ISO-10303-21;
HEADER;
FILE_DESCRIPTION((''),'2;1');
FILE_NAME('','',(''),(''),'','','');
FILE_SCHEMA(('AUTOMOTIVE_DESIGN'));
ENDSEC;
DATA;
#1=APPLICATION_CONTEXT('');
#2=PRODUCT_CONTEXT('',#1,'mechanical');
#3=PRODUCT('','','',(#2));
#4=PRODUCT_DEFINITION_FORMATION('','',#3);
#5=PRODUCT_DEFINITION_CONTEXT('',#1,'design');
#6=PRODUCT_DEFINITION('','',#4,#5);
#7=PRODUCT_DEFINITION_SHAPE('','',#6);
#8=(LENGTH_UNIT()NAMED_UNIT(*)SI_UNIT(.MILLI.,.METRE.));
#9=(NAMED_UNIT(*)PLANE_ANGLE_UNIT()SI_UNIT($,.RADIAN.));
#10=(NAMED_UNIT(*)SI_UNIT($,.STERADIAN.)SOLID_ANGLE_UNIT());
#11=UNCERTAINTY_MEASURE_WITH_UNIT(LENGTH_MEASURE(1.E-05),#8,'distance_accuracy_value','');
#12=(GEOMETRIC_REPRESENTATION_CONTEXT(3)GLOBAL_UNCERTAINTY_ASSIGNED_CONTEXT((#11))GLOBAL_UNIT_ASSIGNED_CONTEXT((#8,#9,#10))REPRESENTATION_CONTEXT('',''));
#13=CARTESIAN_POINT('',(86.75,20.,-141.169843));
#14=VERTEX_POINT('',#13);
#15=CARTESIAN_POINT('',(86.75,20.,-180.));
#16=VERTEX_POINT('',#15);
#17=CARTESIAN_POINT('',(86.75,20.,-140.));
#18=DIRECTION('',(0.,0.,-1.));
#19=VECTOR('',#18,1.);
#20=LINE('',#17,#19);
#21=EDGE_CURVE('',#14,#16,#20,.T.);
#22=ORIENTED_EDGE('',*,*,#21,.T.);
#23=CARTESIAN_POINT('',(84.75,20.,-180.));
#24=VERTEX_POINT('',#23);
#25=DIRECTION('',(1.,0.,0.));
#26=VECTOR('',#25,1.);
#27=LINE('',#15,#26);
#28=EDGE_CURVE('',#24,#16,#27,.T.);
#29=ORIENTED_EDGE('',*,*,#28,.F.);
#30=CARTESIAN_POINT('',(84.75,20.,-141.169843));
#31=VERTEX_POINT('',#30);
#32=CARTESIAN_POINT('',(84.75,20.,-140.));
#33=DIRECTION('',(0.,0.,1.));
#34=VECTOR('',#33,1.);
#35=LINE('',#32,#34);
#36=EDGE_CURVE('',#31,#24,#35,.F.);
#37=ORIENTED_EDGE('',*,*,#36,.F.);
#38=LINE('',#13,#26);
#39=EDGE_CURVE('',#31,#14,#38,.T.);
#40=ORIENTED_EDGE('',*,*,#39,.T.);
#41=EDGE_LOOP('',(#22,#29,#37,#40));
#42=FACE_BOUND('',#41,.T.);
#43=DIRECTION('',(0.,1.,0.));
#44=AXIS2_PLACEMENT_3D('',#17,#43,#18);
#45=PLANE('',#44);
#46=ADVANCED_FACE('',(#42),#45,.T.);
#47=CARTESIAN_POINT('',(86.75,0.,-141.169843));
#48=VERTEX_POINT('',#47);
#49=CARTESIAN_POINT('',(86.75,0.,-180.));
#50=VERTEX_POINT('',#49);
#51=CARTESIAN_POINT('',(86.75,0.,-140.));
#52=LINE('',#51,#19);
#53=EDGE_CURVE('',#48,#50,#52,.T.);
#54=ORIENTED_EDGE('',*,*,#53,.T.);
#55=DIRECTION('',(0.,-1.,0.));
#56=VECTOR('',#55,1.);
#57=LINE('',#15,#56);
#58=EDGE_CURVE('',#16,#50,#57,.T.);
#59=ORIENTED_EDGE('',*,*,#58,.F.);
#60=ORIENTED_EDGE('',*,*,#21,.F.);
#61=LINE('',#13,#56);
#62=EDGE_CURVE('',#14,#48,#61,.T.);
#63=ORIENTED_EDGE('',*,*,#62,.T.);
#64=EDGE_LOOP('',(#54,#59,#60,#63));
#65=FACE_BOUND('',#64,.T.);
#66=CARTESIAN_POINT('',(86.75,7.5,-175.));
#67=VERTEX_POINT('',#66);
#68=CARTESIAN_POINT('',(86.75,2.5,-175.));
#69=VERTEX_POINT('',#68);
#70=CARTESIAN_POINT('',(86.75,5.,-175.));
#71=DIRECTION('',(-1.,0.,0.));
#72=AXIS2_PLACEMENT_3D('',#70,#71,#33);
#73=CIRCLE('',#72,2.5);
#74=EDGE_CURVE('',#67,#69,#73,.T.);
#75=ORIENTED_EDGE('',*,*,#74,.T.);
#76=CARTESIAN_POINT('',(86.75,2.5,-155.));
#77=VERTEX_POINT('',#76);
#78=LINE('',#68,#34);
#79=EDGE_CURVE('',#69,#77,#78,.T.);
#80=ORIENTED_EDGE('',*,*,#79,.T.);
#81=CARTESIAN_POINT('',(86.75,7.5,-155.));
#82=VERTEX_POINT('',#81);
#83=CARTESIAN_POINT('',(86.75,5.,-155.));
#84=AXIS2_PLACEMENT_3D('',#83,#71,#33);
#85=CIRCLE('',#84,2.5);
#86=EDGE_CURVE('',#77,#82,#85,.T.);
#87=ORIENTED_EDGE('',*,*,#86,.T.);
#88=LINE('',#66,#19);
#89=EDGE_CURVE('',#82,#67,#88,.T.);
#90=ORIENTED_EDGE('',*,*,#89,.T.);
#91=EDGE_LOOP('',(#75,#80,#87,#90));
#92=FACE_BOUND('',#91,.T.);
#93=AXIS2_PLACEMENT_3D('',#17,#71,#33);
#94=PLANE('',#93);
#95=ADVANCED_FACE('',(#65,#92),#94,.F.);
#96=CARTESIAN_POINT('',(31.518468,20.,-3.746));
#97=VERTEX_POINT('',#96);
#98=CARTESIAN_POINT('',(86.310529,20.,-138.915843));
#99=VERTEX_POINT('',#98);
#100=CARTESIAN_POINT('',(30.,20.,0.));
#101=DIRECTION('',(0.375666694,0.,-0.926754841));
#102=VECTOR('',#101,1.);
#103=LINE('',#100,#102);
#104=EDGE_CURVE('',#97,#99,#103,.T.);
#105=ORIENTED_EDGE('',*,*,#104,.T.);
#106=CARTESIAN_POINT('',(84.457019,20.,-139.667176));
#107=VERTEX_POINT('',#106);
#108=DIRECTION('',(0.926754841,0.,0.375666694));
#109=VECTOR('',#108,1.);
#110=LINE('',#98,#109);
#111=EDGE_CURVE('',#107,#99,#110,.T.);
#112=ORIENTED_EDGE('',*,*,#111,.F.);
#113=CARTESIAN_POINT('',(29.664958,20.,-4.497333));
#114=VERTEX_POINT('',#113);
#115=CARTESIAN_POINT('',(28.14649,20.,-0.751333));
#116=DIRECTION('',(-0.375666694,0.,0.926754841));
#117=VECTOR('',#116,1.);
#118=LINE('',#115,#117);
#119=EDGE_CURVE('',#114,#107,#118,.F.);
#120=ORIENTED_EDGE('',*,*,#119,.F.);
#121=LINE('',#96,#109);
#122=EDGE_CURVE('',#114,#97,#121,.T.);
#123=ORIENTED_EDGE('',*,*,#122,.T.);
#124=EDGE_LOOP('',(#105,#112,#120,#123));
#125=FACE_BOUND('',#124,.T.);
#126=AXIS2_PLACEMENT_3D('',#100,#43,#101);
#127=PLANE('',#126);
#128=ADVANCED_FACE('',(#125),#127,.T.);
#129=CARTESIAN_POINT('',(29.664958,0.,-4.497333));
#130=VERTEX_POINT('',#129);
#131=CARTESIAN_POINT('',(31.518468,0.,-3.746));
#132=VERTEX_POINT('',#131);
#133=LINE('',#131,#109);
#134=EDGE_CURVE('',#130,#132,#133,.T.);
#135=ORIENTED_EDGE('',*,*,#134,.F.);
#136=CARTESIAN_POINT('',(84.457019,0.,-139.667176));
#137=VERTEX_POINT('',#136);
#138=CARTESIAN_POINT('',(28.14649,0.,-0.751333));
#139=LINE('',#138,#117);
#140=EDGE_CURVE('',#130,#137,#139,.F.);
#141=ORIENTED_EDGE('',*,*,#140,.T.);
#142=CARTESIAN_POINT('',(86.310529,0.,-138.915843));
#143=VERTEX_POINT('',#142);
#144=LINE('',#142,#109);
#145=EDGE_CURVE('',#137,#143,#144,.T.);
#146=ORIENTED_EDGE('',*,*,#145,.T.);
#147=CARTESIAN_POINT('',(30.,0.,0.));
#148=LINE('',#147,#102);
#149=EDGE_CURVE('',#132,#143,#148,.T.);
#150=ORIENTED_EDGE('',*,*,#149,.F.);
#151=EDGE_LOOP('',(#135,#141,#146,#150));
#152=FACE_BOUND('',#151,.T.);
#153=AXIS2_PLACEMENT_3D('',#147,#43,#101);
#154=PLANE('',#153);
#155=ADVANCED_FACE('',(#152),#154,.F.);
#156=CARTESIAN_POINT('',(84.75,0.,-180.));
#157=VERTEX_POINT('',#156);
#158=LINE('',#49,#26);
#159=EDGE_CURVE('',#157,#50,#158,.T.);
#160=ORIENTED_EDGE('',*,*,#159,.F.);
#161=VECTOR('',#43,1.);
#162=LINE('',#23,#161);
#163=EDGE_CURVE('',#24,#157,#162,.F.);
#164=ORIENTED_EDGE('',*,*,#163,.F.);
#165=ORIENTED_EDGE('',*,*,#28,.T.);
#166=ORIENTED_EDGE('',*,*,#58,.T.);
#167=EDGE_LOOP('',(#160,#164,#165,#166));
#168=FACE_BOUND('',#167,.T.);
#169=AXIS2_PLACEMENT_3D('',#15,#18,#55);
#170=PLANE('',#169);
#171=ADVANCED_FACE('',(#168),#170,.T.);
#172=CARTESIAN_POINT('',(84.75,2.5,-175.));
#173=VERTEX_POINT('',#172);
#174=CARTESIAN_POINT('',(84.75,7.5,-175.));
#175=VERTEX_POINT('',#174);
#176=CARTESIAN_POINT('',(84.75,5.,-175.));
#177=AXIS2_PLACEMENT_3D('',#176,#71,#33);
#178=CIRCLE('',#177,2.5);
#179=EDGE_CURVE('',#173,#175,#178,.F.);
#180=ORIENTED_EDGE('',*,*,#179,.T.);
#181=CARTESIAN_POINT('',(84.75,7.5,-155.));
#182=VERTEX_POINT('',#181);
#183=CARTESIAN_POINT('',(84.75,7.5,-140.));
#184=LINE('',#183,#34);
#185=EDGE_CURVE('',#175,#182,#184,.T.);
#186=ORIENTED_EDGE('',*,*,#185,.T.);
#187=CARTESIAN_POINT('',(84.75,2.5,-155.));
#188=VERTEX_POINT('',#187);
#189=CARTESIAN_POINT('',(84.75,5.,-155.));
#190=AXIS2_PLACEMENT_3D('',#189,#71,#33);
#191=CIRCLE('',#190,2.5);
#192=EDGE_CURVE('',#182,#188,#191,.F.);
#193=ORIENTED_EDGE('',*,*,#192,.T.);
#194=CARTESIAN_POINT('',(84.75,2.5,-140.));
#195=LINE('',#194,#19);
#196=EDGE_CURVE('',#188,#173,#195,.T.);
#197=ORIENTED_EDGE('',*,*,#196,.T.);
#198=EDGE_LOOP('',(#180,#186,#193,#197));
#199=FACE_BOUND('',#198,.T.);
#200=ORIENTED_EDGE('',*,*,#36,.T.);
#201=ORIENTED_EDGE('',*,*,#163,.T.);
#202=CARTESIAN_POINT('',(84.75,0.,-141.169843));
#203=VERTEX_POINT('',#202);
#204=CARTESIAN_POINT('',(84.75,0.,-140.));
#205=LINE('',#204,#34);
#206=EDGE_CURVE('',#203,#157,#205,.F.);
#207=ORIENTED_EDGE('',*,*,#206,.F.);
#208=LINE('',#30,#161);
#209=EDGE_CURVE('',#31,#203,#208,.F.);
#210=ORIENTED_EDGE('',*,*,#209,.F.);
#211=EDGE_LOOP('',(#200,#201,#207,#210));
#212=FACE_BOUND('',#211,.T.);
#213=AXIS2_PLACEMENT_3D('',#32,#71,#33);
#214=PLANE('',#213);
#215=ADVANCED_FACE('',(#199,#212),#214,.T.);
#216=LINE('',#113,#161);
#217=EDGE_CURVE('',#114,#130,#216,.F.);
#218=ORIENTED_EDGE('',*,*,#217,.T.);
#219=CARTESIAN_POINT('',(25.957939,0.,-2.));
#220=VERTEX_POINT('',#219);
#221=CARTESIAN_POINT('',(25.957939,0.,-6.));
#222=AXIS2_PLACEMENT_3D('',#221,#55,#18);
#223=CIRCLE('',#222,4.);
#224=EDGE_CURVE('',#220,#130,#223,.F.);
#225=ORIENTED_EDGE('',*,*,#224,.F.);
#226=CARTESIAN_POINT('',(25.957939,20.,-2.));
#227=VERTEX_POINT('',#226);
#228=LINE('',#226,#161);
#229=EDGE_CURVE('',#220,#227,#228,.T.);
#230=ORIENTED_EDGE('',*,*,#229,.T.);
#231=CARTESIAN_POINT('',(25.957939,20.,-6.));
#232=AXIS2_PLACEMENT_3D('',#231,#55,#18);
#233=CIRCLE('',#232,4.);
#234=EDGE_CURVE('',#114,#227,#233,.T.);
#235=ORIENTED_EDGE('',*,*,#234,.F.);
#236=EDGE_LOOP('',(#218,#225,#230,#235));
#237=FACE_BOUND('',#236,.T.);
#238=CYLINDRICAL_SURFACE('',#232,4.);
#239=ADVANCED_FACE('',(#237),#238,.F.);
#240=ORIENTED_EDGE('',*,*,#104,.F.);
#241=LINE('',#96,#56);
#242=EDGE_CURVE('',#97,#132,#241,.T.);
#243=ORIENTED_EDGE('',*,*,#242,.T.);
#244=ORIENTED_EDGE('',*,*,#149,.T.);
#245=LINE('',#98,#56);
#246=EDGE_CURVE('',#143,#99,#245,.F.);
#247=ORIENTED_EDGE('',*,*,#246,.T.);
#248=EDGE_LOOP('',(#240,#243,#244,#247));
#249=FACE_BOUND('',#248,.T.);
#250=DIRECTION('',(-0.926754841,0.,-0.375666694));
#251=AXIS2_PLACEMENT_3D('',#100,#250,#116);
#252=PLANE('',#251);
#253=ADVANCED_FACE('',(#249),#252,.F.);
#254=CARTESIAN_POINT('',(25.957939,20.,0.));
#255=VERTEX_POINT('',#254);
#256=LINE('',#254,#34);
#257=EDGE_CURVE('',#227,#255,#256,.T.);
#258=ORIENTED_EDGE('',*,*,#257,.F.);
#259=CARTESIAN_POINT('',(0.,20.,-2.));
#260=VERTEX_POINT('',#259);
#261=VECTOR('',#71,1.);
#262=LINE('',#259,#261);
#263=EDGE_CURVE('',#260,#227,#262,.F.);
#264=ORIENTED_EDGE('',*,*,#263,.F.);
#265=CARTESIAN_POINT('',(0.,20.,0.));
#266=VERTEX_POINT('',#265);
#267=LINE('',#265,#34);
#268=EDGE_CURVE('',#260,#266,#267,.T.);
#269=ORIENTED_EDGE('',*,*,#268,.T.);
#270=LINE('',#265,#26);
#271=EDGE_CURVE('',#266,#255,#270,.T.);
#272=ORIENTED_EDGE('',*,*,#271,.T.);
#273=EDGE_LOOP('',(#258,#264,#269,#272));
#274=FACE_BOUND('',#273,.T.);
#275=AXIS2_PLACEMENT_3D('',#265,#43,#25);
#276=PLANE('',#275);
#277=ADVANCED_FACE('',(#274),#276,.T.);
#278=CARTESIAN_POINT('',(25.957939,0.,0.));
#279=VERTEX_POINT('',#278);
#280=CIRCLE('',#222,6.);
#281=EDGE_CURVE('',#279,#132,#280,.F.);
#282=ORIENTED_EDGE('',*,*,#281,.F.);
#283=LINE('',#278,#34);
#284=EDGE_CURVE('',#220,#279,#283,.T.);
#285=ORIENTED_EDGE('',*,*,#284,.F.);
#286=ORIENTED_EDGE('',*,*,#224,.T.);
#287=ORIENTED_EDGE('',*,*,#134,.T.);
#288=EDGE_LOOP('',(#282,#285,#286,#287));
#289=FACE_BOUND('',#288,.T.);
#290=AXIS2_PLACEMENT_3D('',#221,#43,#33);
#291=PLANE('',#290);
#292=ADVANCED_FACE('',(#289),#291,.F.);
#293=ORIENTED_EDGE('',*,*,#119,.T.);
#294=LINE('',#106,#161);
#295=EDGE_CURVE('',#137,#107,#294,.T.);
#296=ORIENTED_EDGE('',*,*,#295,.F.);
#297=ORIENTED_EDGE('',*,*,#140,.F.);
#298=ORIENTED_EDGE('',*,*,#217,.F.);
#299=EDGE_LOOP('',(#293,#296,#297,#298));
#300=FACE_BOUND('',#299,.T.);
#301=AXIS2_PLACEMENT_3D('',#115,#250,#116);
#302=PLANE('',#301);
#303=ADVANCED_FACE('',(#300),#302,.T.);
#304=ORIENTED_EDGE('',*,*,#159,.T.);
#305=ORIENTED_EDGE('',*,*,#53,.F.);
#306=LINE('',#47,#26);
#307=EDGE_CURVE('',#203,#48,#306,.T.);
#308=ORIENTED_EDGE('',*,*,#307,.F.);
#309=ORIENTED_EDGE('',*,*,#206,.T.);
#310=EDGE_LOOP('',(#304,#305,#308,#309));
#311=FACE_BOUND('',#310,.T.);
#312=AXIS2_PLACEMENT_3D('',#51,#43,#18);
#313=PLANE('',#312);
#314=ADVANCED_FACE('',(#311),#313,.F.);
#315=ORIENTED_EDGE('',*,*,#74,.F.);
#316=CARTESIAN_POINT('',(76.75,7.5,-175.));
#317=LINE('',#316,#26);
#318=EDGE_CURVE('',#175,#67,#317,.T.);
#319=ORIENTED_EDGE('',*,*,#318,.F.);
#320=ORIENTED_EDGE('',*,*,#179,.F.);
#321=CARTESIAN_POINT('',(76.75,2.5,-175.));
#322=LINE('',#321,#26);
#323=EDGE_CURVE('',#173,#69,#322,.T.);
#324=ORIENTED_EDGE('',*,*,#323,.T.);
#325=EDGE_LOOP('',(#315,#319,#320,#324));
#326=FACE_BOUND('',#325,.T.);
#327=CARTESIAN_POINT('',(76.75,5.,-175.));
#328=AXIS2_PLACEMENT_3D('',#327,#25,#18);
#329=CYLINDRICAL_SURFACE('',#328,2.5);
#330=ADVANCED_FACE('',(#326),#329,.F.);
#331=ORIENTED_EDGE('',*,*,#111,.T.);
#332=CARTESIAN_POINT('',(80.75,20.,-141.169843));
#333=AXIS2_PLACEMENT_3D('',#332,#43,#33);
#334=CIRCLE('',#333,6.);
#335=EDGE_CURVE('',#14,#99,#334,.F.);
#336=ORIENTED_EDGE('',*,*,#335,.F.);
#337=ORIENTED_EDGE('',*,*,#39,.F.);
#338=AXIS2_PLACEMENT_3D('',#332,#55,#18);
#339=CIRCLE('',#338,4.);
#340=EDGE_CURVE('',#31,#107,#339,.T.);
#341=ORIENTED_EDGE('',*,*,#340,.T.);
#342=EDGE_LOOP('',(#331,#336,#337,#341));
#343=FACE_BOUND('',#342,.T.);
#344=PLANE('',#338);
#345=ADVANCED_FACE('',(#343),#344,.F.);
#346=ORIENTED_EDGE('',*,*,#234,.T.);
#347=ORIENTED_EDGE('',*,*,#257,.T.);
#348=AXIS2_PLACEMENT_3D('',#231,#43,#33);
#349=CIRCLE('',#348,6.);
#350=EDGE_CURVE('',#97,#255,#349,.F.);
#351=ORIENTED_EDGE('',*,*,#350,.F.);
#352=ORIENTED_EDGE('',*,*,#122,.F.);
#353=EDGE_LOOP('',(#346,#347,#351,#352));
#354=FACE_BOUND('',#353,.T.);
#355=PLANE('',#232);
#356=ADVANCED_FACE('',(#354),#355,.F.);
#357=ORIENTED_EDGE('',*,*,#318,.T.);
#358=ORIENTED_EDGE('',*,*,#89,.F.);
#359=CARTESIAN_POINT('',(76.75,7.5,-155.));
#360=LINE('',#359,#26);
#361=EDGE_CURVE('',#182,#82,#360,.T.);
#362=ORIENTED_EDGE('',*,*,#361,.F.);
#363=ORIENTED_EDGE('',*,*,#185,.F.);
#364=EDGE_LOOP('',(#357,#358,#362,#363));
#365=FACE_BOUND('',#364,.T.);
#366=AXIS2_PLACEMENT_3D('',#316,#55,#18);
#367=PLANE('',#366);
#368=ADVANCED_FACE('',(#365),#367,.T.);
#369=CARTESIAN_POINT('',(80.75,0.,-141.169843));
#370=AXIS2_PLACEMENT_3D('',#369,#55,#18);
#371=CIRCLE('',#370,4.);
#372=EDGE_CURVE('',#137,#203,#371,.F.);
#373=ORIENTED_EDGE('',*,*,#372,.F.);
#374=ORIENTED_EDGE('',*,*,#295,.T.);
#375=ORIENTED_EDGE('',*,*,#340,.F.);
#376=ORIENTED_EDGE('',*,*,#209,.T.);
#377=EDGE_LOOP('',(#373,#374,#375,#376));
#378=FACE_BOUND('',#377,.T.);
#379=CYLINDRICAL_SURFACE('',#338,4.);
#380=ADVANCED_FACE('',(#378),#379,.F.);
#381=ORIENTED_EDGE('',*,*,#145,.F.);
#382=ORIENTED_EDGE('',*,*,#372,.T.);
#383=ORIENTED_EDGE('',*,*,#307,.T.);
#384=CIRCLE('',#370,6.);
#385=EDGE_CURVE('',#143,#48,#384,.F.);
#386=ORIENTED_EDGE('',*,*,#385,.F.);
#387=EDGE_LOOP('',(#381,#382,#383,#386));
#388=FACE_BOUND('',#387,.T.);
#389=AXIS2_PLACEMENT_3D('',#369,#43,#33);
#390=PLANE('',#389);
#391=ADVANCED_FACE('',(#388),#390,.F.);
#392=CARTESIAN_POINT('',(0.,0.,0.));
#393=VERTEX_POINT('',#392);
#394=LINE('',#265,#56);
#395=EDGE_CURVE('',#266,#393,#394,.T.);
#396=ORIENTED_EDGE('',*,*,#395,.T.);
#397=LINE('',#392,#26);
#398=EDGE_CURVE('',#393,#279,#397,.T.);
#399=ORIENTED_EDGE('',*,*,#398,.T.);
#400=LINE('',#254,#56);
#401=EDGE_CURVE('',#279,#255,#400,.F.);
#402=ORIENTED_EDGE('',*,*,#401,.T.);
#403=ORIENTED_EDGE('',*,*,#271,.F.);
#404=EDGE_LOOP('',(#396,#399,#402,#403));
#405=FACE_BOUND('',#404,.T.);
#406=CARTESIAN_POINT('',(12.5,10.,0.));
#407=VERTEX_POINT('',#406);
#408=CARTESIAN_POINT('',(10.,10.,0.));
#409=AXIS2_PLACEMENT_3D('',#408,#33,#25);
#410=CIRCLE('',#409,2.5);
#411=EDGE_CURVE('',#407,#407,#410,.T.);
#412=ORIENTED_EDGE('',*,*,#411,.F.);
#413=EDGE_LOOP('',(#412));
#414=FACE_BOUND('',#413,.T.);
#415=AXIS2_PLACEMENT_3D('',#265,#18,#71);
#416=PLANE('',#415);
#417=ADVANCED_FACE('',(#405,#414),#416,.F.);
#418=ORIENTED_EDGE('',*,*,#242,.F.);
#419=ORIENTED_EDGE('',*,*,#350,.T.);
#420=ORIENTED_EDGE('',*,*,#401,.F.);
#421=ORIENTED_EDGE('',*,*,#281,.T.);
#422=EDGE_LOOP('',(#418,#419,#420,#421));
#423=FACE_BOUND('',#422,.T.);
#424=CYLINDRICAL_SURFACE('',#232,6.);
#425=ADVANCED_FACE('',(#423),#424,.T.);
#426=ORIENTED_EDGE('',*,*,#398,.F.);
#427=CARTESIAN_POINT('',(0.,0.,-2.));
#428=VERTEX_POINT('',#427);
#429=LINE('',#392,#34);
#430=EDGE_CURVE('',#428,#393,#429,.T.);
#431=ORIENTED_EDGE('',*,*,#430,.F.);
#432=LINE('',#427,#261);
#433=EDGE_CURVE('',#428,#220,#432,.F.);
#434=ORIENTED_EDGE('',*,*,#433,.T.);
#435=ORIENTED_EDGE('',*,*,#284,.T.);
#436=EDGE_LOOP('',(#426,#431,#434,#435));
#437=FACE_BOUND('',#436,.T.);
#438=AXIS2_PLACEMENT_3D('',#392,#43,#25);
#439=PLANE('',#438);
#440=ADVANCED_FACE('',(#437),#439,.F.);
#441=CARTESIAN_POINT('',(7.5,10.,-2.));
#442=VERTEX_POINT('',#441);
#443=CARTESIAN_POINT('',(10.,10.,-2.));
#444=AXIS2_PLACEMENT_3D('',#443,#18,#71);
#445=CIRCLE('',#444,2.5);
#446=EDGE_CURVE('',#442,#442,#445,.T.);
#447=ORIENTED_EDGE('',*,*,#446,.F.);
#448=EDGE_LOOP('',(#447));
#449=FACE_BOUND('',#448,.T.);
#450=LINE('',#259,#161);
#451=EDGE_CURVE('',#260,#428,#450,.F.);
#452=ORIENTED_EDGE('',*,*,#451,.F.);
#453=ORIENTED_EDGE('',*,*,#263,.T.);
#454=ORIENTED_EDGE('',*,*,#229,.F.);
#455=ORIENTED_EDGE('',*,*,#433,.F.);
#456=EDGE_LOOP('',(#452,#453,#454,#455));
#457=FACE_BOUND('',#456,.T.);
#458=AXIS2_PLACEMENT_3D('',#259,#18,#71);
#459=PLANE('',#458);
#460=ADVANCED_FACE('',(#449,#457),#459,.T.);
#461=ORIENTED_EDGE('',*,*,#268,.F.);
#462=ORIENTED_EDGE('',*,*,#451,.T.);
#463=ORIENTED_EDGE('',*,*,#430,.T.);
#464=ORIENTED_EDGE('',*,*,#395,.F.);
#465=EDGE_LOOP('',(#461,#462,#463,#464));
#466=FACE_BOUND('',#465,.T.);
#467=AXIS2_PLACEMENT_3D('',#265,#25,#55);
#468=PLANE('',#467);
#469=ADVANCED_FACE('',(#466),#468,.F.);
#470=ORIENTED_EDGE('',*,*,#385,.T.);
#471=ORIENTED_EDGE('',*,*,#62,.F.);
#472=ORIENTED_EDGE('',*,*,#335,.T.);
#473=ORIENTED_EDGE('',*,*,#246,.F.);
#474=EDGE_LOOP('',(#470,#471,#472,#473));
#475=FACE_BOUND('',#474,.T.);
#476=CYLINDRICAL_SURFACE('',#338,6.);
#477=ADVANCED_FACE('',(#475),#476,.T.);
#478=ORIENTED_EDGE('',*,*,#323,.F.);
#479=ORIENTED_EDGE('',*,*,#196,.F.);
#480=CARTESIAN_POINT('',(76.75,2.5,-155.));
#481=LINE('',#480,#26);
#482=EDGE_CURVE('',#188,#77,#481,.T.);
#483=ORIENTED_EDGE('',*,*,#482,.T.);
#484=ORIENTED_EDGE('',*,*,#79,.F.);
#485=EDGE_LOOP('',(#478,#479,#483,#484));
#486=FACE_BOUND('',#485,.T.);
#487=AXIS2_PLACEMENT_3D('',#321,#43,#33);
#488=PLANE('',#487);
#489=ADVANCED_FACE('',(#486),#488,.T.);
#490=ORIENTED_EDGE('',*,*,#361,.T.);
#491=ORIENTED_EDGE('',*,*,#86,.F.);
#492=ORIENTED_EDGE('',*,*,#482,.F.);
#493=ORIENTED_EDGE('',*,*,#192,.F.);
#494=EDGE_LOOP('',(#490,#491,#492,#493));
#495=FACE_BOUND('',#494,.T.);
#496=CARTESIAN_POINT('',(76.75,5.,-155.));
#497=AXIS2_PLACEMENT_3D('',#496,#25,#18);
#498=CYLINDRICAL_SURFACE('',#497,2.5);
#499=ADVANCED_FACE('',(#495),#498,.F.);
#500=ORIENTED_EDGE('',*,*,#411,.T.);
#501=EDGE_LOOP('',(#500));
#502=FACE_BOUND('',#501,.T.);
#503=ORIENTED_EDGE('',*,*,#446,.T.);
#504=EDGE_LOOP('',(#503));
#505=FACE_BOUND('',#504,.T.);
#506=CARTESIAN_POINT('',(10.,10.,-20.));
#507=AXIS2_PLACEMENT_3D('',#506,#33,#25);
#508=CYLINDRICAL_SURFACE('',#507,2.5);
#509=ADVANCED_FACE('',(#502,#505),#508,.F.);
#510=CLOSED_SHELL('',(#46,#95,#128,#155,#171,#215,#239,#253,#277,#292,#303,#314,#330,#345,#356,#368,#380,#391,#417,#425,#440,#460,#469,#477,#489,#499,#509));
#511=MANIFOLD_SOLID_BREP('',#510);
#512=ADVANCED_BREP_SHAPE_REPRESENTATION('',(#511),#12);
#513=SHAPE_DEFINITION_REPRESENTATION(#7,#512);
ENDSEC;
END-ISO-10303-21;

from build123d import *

# Parameters (mm, degrees)
BOSS_EXTRUDE1_DEPTH  = 20
CONVERT_SOLID2_DEPTH = 20
SKETCH8_R            = 2.5
CUT_EXTRUDE1_DEPTH   = 20
CUT_EXTRUDE2_DEPTH   = 10


# Read off the part's stored shape, not the designer's step: Convert-Solid2
with BuildPart() as part:
    # Sketch1 → Boss-Extrude1 (new body)
    with BuildSketch(Plane(origin=(0, 0, 0), x_dir=(1, 0, 0), z_dir=(0, 1, 0))):
        Polygon((0, 0), (30, 0), (86.75, 140), (86.75, 180), (81.75, 180), (81.75, 140.974868952), (26.631615621, 5), (0, 5), align=None)
    extrude(amount=BOSS_EXTRUDE1_DEPTH)

    # Convert-Solid2 outline → Convert-Solid2 (cut)
    with BuildSketch(Plane(origin=(0, 0, 0), x_dir=(1, 0, 0), z_dir=(0, 1, 0))):
        with BuildLine():
            Line((30, 0), (31.51846779, 3.745999834))
            ThreePointArc((31.51846779, 3.745999834), (29.310251306, 1.023856865), (25.957938746, 0))
            Line((25.957938746, 0), (30, 0))
        make_face()
        with BuildLine():
            ThreePointArc((86.75, 141.169842742), (86.639107499, 140.021621131), (86.310529044, 138.915842576))
            Line((86.310529044, 138.915842576), (86.75, 140))
            Line((86.75, 140), (86.75, 141.169842742))
        make_face()
        with BuildLine():
            Line((0, 5), (0, 2))
            Line((0, 2), (25.957938746, 2))
            ThreePointArc((25.957938746, 2), (28.192813786, 2.682571243), (29.664958108, 4.497333223))
            Line((29.664958108, 4.497333223), (84.457019363, 139.667175965))
            ThreePointArc((84.457019363, 139.667175965), (84.676071666, 140.404361668), (84.75, 141.169842742))
            Line((84.75, 141.169842742), (84.75, 180))
            Line((84.75, 180), (81.75, 180))
            Line((81.75, 180), (81.75, 140.974868952))
            Line((81.75, 140.974868952), (26.631615621, 5))
            Line((26.631615621, 5), (0, 5))
        make_face()
    extrude(amount=CONVERT_SOLID2_DEPTH, mode=Mode.SUBTRACT)

    # Sketch8 → Cut-Extrude1 (cut)
    with BuildSketch(Plane.XY):
        with Locations((10, 10)):
            Circle(SKETCH8_R)
    extrude(amount=-CUT_EXTRUDE1_DEPTH, mode=Mode.SUBTRACT)

    # Sketch9 → Cut-Extrude2 (cut)
    with BuildSketch(Plane(origin=(86.75, 0, -320.372504423), x_dir=(0, 0, 1), z_dir=(-1, 0, 0))):
        with BuildLine():
            Line((145.372504423, 7.5), (165.372504423, 7.5))
            ThreePointArc((165.372504423, 7.5), (167.872504423, 5), (165.372504423, 2.5))
            Line((165.372504423, 2.5), (145.372504423, 2.5))
            ThreePointArc((145.372504423, 2.5), (142.872504423, 5), (145.372504423, 7.5))
        make_face()
    extrude(amount=CUT_EXTRUDE2_DEPTH, mode=Mode.SUBTRACT)


solid = part.part
